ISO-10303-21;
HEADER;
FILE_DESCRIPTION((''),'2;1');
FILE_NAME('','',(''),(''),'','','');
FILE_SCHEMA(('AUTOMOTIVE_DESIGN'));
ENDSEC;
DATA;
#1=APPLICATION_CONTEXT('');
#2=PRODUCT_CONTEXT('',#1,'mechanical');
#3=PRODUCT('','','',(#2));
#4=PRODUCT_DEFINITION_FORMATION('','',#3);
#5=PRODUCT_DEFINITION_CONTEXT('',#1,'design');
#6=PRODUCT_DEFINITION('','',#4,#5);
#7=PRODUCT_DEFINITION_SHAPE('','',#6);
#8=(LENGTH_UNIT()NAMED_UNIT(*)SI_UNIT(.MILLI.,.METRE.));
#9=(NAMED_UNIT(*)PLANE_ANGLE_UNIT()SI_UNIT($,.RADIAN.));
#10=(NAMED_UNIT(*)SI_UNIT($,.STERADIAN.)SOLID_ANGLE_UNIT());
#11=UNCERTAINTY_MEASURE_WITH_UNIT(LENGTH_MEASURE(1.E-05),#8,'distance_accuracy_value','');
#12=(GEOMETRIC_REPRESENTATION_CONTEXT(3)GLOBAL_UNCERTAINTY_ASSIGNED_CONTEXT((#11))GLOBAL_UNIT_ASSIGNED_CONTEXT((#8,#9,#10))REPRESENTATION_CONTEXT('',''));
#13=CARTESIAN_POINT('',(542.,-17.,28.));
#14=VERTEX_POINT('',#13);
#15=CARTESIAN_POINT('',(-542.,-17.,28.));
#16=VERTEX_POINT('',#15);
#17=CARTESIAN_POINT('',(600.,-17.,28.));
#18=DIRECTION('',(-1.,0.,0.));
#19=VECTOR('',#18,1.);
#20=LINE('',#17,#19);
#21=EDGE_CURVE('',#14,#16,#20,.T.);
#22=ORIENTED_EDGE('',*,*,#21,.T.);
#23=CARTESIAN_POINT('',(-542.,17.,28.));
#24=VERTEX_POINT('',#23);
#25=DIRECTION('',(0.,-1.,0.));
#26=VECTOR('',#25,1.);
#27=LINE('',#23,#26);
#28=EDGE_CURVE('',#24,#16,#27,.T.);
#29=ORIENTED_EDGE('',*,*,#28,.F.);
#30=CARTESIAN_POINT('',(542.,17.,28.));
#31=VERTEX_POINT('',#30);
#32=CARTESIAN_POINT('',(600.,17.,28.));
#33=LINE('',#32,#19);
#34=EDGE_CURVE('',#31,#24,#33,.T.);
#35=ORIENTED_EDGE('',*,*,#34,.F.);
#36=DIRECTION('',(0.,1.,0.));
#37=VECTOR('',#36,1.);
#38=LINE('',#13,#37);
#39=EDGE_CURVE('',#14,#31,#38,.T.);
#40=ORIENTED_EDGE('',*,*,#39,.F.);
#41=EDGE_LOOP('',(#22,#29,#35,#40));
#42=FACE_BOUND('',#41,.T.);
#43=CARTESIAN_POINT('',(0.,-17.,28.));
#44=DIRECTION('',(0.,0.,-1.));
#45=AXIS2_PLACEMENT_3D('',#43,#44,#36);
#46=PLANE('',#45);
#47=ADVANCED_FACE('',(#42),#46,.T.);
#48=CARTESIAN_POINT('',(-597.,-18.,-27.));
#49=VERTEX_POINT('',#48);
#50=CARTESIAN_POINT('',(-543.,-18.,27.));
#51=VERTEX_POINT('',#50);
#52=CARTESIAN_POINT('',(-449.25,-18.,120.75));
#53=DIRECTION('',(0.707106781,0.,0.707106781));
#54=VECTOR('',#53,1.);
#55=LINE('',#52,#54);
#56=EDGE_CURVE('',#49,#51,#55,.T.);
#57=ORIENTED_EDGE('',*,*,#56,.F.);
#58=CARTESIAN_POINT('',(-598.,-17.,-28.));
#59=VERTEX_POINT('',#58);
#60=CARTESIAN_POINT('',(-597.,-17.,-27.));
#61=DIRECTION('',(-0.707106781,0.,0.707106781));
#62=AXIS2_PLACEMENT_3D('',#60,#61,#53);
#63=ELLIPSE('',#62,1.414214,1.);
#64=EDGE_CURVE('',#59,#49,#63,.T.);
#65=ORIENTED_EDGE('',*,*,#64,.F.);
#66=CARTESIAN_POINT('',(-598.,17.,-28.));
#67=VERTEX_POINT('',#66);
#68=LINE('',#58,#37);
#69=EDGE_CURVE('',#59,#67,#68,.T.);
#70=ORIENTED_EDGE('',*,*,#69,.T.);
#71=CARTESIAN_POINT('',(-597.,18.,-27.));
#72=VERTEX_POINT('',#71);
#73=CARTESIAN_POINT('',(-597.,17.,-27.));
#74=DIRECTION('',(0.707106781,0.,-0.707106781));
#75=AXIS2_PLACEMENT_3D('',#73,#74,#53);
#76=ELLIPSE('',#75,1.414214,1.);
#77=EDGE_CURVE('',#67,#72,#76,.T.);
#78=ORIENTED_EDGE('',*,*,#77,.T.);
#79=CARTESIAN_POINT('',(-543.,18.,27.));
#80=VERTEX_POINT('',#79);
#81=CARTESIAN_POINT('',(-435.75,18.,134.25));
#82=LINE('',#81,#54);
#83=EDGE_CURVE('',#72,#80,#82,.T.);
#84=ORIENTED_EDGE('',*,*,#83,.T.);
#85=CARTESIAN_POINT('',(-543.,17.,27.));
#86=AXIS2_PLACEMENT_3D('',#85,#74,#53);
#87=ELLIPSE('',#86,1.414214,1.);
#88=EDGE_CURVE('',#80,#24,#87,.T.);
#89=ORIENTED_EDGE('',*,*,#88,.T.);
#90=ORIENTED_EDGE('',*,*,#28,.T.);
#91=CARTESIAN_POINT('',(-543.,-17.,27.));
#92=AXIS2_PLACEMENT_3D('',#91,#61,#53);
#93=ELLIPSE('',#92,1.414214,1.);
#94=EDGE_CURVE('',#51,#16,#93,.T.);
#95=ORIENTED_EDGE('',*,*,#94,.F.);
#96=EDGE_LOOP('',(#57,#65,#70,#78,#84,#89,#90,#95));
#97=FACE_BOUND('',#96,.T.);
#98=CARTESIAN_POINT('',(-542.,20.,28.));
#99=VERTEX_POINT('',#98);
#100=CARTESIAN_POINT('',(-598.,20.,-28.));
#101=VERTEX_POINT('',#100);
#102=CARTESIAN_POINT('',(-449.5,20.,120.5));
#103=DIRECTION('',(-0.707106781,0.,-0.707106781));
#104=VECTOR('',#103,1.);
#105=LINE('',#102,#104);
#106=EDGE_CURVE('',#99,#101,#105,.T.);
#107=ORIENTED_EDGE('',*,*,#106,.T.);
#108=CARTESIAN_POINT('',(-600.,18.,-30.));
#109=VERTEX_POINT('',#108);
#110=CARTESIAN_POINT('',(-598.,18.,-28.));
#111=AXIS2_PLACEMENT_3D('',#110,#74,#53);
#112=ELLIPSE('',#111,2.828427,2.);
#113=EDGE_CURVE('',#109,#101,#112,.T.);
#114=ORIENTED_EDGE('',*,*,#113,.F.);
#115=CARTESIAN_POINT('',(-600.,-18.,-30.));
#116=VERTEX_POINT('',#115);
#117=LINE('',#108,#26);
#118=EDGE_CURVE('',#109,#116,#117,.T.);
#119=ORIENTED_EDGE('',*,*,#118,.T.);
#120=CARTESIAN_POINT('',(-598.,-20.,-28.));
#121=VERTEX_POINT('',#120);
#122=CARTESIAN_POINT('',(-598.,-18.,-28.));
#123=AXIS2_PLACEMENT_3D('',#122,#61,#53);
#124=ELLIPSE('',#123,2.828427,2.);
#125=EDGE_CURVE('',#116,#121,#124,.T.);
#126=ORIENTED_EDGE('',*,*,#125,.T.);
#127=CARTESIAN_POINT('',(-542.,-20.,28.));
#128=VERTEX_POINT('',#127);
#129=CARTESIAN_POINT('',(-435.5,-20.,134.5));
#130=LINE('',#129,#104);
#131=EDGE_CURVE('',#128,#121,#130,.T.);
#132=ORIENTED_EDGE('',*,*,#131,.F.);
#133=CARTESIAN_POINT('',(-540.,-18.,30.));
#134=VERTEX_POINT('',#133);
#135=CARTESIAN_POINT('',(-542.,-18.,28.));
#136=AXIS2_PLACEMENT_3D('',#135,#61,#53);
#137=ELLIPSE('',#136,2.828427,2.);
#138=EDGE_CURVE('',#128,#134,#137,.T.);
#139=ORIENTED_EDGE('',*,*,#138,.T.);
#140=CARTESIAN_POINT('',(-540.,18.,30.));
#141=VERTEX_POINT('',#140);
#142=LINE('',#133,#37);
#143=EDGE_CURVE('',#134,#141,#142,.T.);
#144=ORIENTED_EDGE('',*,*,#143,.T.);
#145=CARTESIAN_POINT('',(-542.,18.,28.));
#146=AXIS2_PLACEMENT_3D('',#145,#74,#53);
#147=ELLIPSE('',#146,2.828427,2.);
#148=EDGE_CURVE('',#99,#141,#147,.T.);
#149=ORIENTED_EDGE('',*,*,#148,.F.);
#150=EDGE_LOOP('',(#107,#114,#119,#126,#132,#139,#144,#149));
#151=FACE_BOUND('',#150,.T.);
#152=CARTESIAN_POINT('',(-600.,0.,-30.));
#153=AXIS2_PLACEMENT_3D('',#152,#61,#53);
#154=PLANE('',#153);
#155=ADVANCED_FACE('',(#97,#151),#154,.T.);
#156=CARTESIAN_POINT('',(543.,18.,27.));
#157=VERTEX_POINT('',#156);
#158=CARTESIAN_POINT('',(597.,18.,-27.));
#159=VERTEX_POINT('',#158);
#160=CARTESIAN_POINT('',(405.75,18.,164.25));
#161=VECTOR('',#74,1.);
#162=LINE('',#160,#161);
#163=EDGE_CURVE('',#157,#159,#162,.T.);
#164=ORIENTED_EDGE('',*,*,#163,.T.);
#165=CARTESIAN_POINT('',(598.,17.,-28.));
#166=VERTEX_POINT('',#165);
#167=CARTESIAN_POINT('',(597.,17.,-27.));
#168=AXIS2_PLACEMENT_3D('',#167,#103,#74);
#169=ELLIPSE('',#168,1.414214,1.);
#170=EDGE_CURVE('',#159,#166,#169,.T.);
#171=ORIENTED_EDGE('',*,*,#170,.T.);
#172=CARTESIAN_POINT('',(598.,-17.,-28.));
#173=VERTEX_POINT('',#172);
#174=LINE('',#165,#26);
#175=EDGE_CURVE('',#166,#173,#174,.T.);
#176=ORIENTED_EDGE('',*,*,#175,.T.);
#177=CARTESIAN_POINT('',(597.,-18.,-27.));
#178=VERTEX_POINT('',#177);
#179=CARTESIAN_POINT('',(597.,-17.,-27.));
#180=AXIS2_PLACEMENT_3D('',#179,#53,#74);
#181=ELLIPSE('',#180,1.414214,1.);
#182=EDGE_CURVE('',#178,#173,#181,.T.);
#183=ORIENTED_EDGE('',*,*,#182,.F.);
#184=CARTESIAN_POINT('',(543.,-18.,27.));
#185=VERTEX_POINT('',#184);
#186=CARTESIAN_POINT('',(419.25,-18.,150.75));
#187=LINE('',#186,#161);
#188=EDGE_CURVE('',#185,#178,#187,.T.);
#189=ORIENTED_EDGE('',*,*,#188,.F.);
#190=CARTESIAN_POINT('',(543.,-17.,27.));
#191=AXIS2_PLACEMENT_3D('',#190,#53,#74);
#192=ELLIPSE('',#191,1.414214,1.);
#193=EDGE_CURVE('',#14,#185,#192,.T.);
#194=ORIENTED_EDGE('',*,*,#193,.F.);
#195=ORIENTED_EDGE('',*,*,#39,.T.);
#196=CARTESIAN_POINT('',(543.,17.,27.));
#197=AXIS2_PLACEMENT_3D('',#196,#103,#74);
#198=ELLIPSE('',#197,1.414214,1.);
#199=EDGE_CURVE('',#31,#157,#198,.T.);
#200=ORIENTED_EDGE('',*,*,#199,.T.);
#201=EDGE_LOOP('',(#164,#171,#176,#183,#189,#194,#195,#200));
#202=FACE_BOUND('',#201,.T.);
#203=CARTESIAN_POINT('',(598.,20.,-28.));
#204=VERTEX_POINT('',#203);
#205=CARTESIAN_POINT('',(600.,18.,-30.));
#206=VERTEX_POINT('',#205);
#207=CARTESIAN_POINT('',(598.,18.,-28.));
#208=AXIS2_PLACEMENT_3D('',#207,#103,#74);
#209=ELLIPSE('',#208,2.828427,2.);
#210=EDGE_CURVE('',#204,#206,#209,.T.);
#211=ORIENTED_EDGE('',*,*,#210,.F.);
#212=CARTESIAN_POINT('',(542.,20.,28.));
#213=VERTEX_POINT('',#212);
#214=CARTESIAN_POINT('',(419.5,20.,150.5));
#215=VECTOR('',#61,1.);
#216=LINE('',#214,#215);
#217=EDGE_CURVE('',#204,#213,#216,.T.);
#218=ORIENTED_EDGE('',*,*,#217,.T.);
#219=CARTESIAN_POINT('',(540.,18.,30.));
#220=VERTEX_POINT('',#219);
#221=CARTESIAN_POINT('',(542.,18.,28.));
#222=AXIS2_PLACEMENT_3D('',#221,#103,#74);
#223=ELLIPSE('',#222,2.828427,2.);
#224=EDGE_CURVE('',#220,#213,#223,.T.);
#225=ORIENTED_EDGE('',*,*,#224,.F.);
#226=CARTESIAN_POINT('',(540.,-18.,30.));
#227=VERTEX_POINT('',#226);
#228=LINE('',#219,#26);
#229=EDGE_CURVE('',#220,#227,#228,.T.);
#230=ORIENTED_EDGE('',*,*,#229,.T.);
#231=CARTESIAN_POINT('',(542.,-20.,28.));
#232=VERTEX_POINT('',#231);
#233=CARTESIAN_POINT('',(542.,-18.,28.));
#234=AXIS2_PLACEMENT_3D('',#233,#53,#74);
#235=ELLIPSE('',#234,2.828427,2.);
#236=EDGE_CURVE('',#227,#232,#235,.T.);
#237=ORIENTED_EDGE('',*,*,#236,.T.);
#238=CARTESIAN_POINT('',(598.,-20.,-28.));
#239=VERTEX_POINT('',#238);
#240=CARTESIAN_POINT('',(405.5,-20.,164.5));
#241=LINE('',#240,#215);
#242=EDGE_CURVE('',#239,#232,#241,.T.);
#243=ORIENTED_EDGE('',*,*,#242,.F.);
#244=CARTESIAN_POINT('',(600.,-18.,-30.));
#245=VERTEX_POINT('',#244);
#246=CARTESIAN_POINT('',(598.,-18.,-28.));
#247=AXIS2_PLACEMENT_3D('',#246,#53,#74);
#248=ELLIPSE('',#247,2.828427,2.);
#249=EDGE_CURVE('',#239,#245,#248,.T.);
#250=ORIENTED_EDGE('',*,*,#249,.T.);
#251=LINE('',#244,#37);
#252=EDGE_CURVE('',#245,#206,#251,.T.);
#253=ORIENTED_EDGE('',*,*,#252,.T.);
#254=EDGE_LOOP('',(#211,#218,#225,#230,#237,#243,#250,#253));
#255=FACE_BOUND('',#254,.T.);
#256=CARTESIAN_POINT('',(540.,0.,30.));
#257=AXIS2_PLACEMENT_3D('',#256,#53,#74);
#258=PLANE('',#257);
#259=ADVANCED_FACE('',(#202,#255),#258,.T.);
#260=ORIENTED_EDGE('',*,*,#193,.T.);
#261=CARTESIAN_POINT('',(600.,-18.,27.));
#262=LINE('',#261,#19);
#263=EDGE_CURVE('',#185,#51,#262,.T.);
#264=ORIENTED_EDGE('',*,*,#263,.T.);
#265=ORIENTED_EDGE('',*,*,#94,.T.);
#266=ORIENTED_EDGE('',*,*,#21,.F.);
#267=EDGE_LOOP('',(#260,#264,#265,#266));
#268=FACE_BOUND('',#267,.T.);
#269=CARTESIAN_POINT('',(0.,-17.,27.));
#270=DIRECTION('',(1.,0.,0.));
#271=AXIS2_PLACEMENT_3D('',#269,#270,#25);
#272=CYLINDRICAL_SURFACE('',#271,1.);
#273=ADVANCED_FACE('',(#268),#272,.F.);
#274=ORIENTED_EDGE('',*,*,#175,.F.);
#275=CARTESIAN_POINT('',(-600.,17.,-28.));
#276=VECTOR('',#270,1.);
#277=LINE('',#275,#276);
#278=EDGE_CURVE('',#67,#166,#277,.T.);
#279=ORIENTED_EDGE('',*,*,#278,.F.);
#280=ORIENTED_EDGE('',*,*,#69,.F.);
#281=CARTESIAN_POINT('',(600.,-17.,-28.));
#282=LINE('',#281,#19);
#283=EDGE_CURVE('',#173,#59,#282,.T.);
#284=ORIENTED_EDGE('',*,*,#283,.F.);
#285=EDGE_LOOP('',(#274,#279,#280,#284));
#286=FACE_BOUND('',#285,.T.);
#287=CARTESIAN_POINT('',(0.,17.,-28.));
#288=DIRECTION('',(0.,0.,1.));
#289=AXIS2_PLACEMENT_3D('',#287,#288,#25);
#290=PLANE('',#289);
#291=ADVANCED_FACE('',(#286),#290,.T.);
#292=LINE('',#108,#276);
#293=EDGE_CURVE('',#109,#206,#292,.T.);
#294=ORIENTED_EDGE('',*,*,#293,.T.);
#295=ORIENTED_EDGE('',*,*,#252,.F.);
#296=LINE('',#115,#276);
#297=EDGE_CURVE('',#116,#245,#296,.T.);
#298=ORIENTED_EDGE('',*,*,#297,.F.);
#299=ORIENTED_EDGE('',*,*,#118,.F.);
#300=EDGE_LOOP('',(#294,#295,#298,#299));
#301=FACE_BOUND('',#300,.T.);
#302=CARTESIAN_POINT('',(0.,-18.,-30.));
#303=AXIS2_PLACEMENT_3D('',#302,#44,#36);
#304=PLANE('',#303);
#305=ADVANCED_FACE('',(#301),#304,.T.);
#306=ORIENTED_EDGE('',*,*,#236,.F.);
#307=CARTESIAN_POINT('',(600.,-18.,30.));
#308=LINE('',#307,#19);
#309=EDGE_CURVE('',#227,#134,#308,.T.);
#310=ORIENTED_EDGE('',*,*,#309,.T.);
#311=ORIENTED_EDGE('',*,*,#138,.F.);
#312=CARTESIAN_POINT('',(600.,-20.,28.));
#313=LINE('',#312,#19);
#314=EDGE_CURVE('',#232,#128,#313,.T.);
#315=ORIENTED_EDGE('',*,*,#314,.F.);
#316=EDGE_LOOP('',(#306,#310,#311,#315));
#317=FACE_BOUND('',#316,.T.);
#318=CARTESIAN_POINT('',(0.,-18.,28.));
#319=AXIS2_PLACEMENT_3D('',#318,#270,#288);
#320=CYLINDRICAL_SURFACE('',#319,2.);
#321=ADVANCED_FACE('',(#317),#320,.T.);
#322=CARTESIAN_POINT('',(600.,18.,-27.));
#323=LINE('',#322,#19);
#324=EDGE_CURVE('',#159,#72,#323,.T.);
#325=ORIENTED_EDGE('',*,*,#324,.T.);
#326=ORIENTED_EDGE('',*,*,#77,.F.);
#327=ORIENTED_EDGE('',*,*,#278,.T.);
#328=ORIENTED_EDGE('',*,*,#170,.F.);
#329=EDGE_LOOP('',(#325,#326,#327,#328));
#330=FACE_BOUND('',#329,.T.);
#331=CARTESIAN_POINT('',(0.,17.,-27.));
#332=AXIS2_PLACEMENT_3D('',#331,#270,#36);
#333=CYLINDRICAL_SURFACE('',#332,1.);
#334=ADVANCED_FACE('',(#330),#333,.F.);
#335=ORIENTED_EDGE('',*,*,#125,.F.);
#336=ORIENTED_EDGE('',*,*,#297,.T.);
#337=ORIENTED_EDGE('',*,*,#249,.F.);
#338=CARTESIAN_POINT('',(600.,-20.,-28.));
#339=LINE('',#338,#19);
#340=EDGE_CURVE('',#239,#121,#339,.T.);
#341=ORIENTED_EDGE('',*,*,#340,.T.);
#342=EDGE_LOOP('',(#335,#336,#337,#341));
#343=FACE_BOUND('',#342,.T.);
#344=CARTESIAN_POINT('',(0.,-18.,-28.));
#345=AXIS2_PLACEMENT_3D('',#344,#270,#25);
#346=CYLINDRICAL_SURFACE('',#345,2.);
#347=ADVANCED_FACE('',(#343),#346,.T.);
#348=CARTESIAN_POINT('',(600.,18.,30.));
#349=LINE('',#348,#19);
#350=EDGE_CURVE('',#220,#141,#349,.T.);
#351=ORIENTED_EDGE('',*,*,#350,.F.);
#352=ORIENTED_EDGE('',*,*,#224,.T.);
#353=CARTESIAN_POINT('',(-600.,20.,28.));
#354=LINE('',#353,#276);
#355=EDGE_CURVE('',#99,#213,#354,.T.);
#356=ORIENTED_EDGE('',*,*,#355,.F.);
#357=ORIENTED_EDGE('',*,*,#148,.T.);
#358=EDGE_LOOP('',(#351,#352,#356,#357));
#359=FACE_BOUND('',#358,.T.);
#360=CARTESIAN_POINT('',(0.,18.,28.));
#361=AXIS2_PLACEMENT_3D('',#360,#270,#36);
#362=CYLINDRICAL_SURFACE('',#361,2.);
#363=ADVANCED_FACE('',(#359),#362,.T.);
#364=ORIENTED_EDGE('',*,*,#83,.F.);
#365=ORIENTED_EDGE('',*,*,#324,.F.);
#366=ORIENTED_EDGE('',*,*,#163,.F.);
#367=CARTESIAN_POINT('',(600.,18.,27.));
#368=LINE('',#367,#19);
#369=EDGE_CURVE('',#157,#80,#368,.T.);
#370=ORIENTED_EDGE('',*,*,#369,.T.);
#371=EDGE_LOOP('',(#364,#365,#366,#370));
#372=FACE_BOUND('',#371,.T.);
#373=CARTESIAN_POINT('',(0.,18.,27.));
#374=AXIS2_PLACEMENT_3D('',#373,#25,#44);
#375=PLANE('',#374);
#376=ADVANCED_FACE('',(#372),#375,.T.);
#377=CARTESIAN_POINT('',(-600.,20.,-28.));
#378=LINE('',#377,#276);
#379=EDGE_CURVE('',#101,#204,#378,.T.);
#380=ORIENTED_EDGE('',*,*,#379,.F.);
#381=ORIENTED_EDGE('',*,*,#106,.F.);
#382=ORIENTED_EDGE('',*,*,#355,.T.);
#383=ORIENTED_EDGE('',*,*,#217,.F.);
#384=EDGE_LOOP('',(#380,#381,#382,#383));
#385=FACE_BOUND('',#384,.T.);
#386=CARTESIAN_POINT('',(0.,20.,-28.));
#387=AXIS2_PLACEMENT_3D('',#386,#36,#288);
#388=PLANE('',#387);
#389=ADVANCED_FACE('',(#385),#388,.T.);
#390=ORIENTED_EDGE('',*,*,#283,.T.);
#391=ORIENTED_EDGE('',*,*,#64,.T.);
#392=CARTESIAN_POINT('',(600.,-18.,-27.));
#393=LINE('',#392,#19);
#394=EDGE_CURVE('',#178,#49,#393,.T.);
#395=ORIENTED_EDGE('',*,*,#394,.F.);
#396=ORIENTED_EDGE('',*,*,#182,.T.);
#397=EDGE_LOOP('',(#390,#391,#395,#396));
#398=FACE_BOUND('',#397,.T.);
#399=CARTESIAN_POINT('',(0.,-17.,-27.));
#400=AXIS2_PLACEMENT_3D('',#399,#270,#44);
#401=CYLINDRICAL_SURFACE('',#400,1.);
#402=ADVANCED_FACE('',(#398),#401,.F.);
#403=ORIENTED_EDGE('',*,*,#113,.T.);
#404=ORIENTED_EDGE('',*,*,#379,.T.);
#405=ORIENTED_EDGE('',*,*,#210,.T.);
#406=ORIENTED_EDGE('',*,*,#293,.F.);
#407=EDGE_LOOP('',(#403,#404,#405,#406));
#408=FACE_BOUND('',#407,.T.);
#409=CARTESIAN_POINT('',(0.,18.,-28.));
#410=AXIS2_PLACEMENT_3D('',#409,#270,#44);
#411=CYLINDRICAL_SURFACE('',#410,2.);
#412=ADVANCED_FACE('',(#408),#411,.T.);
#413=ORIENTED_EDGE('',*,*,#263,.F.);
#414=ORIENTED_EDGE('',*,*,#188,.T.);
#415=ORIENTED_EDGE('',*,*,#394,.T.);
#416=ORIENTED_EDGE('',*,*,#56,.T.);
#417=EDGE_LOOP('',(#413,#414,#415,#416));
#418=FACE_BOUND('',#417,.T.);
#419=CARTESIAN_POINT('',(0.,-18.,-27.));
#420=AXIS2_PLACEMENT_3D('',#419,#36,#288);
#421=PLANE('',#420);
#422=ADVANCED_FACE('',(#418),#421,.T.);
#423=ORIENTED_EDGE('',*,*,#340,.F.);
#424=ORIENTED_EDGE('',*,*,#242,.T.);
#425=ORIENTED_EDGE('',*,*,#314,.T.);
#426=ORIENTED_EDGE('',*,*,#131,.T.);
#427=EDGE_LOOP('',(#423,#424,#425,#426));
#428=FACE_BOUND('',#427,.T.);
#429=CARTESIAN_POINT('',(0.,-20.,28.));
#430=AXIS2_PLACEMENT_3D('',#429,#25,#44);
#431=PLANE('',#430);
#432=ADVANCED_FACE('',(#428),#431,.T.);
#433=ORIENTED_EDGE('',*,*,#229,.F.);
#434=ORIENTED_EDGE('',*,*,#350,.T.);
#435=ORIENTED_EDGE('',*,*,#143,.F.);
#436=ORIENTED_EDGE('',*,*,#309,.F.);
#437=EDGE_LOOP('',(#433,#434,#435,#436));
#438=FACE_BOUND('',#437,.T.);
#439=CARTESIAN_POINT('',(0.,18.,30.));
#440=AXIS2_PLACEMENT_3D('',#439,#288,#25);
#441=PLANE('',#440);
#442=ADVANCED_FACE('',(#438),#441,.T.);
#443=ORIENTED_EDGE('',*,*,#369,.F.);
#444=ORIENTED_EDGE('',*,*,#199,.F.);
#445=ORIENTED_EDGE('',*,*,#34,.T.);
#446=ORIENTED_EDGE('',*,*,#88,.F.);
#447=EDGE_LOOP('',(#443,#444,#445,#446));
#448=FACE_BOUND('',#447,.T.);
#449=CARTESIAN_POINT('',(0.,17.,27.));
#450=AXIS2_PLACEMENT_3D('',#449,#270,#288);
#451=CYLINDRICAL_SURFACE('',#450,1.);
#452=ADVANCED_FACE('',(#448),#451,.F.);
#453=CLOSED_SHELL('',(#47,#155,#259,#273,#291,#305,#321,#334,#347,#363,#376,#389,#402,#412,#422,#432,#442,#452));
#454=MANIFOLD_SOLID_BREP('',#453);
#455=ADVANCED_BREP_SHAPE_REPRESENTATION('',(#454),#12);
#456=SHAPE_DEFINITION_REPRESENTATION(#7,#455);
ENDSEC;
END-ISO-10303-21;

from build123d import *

# Parameters (mm, degrees)
F1_DEPTH      = 600
F1_DEPTH_BACK = 600
F3_DEPTH      = 25
F3_DEPTH_BACK = 25


with BuildPart() as f1:
    # F0 (on Right) → F1 (new body, two sides)
    with BuildSketch(Plane.YZ) as f1_sk:
        with BuildLine():
            ThreePointArc((-20, -28), (-19.4142135624, -29.4142135624), (-18, -30))
            Line((-18, -30), (18, -30))
            ThreePointArc((18, -30), (19.4142135624, -29.4142135624), (20, -28))
            Line((20, -28), (20, 28))
            ThreePointArc((20, 28), (19.4142135624, 29.4142135624), (18, 30))
            Line((18, 30), (-18, 30))
            ThreePointArc((-18, 30), (-19.4142135624, 29.4142135624), (-20, 28))
            Line((-20, 28), (-20, -28))
        make_face()
        with BuildLine():
            Line((17, -28), (-17, -28))
            ThreePointArc((-17, -28), (-17.7071067812, -27.7071067812), (-18, -27))
            Line((-18, -27), (-18, 27))
            ThreePointArc((-18, 27), (-17.7071067812, 27.7071067812), (-17, 28))
            Line((-17, 28), (17, 28))
            ThreePointArc((17, 28), (17.7071067812, 27.7071067812), (18, 27))
            Line((18, 27), (18, -27))
            ThreePointArc((18, -27), (17.7071067812, -27.7071067812), (17, -28))
        make_face(mode=Mode.SUBTRACT)
    extrude(amount=F1_DEPTH)
    extrude(f1_sk.sketch, amount=-F1_DEPTH_BACK)

    # F2 (on Front) → F3 (cut, two sides)
    with BuildSketch(Plane.XZ) as f3_sk:
        Polygon((-600, 30), (-600, -30), (-540, 30), align=None)
        Polygon((540, 30), (600, -30), (600, 30), align=None)
    extrude(amount=-F3_DEPTH, mode=Mode.SUBTRACT)
    extrude(f3_sk.sketch, amount=F3_DEPTH_BACK, mode=Mode.SUBTRACT)


solid = f1.part
